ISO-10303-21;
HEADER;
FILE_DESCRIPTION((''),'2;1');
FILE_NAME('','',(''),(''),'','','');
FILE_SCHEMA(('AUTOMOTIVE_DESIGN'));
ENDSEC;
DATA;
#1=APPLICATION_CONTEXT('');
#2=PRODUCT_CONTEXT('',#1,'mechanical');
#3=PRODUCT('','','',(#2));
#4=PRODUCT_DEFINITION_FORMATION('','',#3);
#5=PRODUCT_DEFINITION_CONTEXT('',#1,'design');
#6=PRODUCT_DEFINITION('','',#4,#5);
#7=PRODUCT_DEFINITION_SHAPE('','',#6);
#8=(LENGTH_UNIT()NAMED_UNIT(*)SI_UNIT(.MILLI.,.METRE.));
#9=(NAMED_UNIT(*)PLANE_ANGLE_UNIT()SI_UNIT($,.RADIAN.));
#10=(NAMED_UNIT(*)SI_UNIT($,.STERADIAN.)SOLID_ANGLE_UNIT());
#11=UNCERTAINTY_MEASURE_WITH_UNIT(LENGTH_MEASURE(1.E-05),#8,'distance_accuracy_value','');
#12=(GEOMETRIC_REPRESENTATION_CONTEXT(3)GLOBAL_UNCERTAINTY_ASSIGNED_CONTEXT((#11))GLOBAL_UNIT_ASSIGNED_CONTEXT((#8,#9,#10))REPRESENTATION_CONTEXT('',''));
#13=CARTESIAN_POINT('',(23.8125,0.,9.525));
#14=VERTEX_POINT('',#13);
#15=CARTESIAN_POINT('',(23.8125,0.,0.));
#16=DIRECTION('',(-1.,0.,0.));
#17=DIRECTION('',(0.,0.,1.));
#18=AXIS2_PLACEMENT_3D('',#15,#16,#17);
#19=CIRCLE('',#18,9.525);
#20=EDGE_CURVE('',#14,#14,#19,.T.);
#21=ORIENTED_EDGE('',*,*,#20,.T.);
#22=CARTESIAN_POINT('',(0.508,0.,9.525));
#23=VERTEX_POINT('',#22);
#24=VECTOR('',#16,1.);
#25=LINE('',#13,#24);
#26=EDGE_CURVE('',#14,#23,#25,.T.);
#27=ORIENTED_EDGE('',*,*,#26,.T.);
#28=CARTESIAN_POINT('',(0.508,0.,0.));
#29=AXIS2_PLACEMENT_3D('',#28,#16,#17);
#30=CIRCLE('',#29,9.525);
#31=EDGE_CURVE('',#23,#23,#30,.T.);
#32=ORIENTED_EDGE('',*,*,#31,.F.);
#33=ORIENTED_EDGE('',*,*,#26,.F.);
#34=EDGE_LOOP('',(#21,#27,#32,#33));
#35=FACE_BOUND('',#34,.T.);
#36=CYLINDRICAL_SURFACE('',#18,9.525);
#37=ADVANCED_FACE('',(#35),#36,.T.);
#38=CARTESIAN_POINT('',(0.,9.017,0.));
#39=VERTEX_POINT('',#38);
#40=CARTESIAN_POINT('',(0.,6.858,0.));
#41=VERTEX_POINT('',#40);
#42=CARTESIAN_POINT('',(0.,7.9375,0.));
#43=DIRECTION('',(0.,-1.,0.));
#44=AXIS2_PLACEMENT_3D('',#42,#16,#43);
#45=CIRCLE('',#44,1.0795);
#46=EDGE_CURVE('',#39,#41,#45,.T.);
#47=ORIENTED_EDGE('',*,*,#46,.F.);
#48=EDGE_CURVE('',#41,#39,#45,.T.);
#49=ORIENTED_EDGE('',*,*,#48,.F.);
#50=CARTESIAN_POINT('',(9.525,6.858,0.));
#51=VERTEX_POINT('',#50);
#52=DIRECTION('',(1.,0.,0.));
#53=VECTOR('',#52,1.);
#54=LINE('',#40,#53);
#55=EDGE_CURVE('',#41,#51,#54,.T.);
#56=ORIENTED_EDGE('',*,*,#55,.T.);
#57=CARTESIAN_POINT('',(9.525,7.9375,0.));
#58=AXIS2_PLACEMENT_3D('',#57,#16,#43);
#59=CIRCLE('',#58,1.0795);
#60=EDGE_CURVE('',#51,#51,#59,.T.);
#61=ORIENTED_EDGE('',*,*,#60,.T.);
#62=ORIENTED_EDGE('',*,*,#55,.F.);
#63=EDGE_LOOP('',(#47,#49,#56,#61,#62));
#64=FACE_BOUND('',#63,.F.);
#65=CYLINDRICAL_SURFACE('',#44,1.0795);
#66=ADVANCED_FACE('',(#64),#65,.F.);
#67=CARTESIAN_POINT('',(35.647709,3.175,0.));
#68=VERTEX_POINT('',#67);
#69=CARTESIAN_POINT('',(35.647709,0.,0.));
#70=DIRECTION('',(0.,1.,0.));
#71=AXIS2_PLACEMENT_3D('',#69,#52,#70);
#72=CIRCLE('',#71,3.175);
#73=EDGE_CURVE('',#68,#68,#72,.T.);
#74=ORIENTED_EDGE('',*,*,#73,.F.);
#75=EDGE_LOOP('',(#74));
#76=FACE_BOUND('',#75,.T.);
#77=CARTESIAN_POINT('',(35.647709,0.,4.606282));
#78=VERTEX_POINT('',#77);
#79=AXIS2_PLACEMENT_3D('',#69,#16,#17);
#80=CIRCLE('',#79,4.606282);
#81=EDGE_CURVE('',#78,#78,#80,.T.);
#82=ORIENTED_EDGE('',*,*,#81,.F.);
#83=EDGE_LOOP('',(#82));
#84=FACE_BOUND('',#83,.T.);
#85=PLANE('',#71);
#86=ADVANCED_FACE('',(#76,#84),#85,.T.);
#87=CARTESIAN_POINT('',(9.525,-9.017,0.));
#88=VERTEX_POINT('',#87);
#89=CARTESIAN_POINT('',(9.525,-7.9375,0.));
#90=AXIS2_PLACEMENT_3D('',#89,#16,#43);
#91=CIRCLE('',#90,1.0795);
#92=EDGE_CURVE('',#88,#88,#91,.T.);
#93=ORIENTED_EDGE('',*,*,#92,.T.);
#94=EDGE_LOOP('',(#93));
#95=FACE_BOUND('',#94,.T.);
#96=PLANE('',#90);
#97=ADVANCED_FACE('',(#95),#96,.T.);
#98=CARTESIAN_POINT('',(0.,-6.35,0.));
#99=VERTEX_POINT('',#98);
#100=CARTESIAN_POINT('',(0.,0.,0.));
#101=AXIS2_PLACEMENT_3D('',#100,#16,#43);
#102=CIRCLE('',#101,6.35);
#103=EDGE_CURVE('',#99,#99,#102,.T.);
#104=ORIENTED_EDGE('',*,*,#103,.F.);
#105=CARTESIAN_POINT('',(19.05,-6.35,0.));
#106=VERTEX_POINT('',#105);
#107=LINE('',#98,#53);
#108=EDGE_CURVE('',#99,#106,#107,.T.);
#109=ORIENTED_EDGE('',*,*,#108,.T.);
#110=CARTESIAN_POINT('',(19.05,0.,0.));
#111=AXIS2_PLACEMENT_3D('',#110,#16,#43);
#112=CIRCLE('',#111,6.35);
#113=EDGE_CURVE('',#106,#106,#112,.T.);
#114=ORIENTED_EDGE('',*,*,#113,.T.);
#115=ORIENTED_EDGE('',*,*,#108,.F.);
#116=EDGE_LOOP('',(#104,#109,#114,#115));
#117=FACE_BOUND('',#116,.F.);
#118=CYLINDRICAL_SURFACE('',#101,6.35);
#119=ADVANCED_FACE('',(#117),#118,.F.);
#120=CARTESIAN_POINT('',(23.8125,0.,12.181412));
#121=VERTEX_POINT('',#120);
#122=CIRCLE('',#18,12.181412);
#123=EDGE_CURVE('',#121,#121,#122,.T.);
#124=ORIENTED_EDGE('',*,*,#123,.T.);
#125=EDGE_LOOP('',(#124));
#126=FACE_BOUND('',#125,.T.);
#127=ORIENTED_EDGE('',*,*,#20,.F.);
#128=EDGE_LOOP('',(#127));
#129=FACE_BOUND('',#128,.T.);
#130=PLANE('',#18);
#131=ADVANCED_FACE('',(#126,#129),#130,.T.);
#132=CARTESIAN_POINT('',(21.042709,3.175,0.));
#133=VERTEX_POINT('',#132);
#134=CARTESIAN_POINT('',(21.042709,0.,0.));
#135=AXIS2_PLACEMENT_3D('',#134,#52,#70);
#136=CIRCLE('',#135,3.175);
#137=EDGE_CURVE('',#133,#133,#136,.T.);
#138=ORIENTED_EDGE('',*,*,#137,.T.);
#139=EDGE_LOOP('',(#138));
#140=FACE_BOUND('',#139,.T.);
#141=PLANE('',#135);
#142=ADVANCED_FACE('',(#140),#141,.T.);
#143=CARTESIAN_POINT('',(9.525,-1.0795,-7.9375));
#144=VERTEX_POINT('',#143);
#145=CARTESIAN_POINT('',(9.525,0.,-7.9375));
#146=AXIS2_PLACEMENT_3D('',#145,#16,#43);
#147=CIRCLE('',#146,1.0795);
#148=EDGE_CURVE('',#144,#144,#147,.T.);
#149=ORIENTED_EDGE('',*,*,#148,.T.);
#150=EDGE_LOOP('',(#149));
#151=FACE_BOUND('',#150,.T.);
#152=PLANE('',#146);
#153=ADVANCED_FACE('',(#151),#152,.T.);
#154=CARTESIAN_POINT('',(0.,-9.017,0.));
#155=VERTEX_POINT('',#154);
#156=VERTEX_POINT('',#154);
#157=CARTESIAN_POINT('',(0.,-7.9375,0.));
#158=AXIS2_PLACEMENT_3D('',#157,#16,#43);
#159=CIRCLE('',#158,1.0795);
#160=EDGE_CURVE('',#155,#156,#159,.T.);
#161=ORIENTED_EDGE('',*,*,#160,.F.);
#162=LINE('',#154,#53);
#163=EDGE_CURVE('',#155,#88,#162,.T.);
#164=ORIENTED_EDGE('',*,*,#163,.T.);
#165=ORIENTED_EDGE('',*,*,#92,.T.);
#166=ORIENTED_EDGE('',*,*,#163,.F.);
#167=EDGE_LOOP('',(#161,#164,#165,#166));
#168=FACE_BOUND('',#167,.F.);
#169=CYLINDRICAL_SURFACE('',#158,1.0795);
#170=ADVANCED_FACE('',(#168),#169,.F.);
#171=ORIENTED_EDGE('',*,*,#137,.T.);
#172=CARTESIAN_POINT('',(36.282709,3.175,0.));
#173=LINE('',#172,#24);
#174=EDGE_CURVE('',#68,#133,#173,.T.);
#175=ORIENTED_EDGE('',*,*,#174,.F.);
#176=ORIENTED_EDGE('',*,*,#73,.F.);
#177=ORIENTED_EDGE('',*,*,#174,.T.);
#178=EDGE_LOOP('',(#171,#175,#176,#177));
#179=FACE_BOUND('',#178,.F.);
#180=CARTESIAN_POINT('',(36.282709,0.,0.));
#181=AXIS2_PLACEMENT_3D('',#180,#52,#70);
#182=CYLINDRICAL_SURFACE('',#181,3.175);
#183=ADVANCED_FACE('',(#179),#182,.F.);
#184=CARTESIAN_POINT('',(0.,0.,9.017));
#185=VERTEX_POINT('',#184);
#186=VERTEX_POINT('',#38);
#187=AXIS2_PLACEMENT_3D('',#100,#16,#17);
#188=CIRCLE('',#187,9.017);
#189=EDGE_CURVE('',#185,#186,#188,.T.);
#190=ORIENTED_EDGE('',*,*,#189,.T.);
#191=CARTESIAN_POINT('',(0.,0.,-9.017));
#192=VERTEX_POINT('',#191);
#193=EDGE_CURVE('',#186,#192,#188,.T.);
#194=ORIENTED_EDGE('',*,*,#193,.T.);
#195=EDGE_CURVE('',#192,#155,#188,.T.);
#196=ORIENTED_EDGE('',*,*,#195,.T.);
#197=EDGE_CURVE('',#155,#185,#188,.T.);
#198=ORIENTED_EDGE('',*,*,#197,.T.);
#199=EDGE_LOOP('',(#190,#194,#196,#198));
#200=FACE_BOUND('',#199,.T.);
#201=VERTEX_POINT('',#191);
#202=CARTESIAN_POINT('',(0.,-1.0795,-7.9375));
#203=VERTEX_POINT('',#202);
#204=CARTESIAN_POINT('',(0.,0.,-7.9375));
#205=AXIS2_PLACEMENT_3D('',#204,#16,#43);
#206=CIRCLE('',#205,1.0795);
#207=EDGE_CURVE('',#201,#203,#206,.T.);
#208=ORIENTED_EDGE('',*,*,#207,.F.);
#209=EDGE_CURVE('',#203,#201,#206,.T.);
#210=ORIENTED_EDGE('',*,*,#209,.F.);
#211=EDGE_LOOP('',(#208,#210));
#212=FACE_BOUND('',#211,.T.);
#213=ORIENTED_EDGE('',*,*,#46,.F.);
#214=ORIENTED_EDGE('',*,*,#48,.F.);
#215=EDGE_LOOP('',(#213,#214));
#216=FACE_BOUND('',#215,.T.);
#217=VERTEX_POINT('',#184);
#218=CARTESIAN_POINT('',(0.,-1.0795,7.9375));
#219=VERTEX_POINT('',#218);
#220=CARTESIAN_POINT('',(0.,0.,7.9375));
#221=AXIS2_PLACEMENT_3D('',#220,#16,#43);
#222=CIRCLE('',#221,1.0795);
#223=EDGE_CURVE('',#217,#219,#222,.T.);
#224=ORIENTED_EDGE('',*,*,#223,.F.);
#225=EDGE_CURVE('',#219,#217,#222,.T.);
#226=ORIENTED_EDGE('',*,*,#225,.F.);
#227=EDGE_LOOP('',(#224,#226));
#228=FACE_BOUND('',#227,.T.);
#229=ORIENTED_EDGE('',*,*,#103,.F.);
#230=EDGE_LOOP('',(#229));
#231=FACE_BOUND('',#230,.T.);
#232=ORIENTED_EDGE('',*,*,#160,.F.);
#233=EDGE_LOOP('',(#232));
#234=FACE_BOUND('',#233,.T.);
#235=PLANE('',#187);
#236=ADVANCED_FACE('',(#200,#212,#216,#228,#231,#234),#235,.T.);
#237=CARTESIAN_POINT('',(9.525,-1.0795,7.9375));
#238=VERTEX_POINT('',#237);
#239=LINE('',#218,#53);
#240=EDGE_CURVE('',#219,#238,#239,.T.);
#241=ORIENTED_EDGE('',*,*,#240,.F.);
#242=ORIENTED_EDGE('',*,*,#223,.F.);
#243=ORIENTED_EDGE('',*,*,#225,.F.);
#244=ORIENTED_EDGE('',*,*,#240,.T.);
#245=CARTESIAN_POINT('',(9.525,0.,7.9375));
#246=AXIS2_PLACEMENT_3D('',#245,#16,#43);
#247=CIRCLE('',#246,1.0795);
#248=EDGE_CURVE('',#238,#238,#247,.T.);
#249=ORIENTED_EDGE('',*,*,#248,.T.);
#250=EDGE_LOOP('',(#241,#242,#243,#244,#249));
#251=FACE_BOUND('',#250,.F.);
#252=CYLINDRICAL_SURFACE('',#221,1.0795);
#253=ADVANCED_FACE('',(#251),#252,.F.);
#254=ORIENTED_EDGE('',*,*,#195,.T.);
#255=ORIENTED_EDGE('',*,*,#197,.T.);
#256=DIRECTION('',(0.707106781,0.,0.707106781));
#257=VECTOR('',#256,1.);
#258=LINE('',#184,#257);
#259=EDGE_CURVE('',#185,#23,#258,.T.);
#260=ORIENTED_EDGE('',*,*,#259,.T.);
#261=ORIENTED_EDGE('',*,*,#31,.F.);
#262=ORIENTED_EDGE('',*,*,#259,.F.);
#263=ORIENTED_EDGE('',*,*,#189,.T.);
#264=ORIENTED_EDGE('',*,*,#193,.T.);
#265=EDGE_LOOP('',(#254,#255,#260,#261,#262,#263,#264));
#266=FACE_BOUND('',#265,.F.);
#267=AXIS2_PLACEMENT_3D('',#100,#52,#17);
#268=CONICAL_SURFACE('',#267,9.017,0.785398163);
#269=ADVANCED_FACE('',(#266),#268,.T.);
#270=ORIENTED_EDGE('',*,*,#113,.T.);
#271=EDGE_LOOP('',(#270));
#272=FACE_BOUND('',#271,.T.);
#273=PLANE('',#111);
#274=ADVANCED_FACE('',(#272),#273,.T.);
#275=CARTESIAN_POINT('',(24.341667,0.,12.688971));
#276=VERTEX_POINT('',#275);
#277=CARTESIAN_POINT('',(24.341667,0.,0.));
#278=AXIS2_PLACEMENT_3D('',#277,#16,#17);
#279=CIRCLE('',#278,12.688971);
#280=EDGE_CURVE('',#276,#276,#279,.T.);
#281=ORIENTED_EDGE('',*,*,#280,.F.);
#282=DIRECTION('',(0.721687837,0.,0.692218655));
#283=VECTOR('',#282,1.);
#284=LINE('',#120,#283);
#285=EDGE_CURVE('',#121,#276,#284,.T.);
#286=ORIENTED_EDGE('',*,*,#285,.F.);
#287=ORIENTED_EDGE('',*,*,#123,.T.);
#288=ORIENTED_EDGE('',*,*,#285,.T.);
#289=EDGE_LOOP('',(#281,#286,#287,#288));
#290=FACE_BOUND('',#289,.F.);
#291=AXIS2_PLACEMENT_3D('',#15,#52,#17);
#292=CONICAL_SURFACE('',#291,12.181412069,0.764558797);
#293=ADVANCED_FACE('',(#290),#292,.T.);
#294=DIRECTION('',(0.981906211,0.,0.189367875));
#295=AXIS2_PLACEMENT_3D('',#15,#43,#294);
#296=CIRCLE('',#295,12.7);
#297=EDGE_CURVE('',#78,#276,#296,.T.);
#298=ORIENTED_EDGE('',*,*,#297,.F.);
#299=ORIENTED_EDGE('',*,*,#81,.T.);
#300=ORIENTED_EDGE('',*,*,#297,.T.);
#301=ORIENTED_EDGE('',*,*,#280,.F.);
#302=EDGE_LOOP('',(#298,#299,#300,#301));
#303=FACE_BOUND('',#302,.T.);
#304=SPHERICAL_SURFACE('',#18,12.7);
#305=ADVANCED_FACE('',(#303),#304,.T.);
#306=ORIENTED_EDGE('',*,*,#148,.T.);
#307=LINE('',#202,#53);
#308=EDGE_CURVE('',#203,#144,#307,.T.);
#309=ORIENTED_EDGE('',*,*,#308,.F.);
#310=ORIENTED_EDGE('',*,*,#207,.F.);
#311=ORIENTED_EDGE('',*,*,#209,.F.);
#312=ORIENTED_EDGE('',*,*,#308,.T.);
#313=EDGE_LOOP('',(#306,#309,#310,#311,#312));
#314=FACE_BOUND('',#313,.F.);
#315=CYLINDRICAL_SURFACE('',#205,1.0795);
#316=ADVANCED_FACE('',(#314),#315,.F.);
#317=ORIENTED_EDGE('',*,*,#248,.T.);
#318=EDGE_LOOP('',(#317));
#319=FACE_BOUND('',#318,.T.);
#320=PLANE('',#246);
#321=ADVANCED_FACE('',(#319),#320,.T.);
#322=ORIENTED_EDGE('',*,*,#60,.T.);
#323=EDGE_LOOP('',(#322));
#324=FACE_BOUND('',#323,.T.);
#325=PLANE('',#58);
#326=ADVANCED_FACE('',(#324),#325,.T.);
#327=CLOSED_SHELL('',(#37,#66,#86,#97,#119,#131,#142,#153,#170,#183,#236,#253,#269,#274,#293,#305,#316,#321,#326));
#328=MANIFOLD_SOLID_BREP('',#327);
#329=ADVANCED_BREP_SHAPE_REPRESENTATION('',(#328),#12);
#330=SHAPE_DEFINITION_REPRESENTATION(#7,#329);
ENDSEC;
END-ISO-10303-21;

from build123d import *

# Parameters (mm, degrees)
F2_R      = 3.175
F3_DEPTH  = 15.24
F5_R      = 4.7625
F6_DEPTH  = 0.635
F7_R      = 6.35
F8_DEPTH  = 19.05
F10_R     = 1.0795
F11_DEPTH = 9.525


# Not quite as in the source:
# - a fillet or chamfer that OpenCascade refuses, or shapes differently, is made with other operations: its cross-section is extruded or revolved along the edge and cut away or added


with BuildPart() as f1:
    # F0 (on Front) → F1 (revolve)
    with BuildSketch(Plane.XZ):
        with BuildLine():
            Line((0, 9.525), (0, 0))
            Line((0, 0), (36.2827088845, 0))
            Line((36.2827088845, 0), (36.2827088845, 2.4049720118))
            ThreePointArc((36.2827088845, 2.4049720118), (31.8978835855, 9.7937006425), (23.8125, 12.7))
            Line((23.8125, 12.7), (23.8125, 9.525))
            Line((23.8125, 9.525), (0, 9.525))
        make_face()
    revolve(axis=Axis((18.1413544422, 0, 0), (-1, 0, 0)))

    # F2 (on face) → F3 (cut)
    with BuildSketch(Plane.YZ.offset(36.2827088845)):
        Circle(F2_R)
    extrude(amount=-F3_DEPTH, mode=Mode.SUBTRACT)

    # F5 (on offset) → F6 (cut)
    with BuildSketch(Plane.YZ.offset(36.2827088845)):
        Circle(F5_R)
    extrude(amount=-F6_DEPTH, mode=Mode.SUBTRACT)

    # F7 (on face) → F8 (cut)
    with BuildSketch(Plane(origin=(0, 0, 0), x_dir=(0, -1, 0), z_dir=(-1, 0, 0))):
        Circle(F7_R)
    extrude(amount=-F8_DEPTH, mode=Mode.SUBTRACT)

    # F9: chamfer of 0.508 on 2 edges, made by hand

    # F9_s1 → F9_t2 (revolve, cut)
    with BuildSketch(Plane.XZ):
        with BuildLine():
            Line((23.8125, 12.1814120692), (24.3416666667, 12.6889709054))
            ThreePointArc((24.3416666667, 12.6889709054), (24.0843208941, 12.6970907456), (23.8125, 12.7))
            Line((23.8125, 12.7), (23.8125, 12.1814120692))
        make_face()
    revolve(axis=Axis((23.8125, 0, 0), (-1, 0, 0)), mode=Mode.SUBTRACT)

    # F9_s3 → F9_t4 (revolve, cut)
    with BuildSketch(Plane.XZ):
        Polygon((0, 9.017), (0.508, 9.525), (0, 9.525), align=None)
    revolve(axis=Axis((0, 0, 0), (-1, 0, 0)), mode=Mode.SUBTRACT)

    # F10 (on face) → F11 (cut)
    with BuildSketch(Plane(origin=(0, 0, 0), x_dir=(0, -1, 0), z_dir=(-1, 0, 0))):
        with Locations((0, 7.9375)):
            Circle(F10_R)
        with Locations((0, -7.9375)):
            Circle(F10_R)
        with Locations((7.9375, 0)):
            Circle(F10_R)
        with Locations((-7.9375, 0)):
            Circle(F10_R)
    extrude(amount=-F11_DEPTH, mode=Mode.SUBTRACT)


solid = f1.part
